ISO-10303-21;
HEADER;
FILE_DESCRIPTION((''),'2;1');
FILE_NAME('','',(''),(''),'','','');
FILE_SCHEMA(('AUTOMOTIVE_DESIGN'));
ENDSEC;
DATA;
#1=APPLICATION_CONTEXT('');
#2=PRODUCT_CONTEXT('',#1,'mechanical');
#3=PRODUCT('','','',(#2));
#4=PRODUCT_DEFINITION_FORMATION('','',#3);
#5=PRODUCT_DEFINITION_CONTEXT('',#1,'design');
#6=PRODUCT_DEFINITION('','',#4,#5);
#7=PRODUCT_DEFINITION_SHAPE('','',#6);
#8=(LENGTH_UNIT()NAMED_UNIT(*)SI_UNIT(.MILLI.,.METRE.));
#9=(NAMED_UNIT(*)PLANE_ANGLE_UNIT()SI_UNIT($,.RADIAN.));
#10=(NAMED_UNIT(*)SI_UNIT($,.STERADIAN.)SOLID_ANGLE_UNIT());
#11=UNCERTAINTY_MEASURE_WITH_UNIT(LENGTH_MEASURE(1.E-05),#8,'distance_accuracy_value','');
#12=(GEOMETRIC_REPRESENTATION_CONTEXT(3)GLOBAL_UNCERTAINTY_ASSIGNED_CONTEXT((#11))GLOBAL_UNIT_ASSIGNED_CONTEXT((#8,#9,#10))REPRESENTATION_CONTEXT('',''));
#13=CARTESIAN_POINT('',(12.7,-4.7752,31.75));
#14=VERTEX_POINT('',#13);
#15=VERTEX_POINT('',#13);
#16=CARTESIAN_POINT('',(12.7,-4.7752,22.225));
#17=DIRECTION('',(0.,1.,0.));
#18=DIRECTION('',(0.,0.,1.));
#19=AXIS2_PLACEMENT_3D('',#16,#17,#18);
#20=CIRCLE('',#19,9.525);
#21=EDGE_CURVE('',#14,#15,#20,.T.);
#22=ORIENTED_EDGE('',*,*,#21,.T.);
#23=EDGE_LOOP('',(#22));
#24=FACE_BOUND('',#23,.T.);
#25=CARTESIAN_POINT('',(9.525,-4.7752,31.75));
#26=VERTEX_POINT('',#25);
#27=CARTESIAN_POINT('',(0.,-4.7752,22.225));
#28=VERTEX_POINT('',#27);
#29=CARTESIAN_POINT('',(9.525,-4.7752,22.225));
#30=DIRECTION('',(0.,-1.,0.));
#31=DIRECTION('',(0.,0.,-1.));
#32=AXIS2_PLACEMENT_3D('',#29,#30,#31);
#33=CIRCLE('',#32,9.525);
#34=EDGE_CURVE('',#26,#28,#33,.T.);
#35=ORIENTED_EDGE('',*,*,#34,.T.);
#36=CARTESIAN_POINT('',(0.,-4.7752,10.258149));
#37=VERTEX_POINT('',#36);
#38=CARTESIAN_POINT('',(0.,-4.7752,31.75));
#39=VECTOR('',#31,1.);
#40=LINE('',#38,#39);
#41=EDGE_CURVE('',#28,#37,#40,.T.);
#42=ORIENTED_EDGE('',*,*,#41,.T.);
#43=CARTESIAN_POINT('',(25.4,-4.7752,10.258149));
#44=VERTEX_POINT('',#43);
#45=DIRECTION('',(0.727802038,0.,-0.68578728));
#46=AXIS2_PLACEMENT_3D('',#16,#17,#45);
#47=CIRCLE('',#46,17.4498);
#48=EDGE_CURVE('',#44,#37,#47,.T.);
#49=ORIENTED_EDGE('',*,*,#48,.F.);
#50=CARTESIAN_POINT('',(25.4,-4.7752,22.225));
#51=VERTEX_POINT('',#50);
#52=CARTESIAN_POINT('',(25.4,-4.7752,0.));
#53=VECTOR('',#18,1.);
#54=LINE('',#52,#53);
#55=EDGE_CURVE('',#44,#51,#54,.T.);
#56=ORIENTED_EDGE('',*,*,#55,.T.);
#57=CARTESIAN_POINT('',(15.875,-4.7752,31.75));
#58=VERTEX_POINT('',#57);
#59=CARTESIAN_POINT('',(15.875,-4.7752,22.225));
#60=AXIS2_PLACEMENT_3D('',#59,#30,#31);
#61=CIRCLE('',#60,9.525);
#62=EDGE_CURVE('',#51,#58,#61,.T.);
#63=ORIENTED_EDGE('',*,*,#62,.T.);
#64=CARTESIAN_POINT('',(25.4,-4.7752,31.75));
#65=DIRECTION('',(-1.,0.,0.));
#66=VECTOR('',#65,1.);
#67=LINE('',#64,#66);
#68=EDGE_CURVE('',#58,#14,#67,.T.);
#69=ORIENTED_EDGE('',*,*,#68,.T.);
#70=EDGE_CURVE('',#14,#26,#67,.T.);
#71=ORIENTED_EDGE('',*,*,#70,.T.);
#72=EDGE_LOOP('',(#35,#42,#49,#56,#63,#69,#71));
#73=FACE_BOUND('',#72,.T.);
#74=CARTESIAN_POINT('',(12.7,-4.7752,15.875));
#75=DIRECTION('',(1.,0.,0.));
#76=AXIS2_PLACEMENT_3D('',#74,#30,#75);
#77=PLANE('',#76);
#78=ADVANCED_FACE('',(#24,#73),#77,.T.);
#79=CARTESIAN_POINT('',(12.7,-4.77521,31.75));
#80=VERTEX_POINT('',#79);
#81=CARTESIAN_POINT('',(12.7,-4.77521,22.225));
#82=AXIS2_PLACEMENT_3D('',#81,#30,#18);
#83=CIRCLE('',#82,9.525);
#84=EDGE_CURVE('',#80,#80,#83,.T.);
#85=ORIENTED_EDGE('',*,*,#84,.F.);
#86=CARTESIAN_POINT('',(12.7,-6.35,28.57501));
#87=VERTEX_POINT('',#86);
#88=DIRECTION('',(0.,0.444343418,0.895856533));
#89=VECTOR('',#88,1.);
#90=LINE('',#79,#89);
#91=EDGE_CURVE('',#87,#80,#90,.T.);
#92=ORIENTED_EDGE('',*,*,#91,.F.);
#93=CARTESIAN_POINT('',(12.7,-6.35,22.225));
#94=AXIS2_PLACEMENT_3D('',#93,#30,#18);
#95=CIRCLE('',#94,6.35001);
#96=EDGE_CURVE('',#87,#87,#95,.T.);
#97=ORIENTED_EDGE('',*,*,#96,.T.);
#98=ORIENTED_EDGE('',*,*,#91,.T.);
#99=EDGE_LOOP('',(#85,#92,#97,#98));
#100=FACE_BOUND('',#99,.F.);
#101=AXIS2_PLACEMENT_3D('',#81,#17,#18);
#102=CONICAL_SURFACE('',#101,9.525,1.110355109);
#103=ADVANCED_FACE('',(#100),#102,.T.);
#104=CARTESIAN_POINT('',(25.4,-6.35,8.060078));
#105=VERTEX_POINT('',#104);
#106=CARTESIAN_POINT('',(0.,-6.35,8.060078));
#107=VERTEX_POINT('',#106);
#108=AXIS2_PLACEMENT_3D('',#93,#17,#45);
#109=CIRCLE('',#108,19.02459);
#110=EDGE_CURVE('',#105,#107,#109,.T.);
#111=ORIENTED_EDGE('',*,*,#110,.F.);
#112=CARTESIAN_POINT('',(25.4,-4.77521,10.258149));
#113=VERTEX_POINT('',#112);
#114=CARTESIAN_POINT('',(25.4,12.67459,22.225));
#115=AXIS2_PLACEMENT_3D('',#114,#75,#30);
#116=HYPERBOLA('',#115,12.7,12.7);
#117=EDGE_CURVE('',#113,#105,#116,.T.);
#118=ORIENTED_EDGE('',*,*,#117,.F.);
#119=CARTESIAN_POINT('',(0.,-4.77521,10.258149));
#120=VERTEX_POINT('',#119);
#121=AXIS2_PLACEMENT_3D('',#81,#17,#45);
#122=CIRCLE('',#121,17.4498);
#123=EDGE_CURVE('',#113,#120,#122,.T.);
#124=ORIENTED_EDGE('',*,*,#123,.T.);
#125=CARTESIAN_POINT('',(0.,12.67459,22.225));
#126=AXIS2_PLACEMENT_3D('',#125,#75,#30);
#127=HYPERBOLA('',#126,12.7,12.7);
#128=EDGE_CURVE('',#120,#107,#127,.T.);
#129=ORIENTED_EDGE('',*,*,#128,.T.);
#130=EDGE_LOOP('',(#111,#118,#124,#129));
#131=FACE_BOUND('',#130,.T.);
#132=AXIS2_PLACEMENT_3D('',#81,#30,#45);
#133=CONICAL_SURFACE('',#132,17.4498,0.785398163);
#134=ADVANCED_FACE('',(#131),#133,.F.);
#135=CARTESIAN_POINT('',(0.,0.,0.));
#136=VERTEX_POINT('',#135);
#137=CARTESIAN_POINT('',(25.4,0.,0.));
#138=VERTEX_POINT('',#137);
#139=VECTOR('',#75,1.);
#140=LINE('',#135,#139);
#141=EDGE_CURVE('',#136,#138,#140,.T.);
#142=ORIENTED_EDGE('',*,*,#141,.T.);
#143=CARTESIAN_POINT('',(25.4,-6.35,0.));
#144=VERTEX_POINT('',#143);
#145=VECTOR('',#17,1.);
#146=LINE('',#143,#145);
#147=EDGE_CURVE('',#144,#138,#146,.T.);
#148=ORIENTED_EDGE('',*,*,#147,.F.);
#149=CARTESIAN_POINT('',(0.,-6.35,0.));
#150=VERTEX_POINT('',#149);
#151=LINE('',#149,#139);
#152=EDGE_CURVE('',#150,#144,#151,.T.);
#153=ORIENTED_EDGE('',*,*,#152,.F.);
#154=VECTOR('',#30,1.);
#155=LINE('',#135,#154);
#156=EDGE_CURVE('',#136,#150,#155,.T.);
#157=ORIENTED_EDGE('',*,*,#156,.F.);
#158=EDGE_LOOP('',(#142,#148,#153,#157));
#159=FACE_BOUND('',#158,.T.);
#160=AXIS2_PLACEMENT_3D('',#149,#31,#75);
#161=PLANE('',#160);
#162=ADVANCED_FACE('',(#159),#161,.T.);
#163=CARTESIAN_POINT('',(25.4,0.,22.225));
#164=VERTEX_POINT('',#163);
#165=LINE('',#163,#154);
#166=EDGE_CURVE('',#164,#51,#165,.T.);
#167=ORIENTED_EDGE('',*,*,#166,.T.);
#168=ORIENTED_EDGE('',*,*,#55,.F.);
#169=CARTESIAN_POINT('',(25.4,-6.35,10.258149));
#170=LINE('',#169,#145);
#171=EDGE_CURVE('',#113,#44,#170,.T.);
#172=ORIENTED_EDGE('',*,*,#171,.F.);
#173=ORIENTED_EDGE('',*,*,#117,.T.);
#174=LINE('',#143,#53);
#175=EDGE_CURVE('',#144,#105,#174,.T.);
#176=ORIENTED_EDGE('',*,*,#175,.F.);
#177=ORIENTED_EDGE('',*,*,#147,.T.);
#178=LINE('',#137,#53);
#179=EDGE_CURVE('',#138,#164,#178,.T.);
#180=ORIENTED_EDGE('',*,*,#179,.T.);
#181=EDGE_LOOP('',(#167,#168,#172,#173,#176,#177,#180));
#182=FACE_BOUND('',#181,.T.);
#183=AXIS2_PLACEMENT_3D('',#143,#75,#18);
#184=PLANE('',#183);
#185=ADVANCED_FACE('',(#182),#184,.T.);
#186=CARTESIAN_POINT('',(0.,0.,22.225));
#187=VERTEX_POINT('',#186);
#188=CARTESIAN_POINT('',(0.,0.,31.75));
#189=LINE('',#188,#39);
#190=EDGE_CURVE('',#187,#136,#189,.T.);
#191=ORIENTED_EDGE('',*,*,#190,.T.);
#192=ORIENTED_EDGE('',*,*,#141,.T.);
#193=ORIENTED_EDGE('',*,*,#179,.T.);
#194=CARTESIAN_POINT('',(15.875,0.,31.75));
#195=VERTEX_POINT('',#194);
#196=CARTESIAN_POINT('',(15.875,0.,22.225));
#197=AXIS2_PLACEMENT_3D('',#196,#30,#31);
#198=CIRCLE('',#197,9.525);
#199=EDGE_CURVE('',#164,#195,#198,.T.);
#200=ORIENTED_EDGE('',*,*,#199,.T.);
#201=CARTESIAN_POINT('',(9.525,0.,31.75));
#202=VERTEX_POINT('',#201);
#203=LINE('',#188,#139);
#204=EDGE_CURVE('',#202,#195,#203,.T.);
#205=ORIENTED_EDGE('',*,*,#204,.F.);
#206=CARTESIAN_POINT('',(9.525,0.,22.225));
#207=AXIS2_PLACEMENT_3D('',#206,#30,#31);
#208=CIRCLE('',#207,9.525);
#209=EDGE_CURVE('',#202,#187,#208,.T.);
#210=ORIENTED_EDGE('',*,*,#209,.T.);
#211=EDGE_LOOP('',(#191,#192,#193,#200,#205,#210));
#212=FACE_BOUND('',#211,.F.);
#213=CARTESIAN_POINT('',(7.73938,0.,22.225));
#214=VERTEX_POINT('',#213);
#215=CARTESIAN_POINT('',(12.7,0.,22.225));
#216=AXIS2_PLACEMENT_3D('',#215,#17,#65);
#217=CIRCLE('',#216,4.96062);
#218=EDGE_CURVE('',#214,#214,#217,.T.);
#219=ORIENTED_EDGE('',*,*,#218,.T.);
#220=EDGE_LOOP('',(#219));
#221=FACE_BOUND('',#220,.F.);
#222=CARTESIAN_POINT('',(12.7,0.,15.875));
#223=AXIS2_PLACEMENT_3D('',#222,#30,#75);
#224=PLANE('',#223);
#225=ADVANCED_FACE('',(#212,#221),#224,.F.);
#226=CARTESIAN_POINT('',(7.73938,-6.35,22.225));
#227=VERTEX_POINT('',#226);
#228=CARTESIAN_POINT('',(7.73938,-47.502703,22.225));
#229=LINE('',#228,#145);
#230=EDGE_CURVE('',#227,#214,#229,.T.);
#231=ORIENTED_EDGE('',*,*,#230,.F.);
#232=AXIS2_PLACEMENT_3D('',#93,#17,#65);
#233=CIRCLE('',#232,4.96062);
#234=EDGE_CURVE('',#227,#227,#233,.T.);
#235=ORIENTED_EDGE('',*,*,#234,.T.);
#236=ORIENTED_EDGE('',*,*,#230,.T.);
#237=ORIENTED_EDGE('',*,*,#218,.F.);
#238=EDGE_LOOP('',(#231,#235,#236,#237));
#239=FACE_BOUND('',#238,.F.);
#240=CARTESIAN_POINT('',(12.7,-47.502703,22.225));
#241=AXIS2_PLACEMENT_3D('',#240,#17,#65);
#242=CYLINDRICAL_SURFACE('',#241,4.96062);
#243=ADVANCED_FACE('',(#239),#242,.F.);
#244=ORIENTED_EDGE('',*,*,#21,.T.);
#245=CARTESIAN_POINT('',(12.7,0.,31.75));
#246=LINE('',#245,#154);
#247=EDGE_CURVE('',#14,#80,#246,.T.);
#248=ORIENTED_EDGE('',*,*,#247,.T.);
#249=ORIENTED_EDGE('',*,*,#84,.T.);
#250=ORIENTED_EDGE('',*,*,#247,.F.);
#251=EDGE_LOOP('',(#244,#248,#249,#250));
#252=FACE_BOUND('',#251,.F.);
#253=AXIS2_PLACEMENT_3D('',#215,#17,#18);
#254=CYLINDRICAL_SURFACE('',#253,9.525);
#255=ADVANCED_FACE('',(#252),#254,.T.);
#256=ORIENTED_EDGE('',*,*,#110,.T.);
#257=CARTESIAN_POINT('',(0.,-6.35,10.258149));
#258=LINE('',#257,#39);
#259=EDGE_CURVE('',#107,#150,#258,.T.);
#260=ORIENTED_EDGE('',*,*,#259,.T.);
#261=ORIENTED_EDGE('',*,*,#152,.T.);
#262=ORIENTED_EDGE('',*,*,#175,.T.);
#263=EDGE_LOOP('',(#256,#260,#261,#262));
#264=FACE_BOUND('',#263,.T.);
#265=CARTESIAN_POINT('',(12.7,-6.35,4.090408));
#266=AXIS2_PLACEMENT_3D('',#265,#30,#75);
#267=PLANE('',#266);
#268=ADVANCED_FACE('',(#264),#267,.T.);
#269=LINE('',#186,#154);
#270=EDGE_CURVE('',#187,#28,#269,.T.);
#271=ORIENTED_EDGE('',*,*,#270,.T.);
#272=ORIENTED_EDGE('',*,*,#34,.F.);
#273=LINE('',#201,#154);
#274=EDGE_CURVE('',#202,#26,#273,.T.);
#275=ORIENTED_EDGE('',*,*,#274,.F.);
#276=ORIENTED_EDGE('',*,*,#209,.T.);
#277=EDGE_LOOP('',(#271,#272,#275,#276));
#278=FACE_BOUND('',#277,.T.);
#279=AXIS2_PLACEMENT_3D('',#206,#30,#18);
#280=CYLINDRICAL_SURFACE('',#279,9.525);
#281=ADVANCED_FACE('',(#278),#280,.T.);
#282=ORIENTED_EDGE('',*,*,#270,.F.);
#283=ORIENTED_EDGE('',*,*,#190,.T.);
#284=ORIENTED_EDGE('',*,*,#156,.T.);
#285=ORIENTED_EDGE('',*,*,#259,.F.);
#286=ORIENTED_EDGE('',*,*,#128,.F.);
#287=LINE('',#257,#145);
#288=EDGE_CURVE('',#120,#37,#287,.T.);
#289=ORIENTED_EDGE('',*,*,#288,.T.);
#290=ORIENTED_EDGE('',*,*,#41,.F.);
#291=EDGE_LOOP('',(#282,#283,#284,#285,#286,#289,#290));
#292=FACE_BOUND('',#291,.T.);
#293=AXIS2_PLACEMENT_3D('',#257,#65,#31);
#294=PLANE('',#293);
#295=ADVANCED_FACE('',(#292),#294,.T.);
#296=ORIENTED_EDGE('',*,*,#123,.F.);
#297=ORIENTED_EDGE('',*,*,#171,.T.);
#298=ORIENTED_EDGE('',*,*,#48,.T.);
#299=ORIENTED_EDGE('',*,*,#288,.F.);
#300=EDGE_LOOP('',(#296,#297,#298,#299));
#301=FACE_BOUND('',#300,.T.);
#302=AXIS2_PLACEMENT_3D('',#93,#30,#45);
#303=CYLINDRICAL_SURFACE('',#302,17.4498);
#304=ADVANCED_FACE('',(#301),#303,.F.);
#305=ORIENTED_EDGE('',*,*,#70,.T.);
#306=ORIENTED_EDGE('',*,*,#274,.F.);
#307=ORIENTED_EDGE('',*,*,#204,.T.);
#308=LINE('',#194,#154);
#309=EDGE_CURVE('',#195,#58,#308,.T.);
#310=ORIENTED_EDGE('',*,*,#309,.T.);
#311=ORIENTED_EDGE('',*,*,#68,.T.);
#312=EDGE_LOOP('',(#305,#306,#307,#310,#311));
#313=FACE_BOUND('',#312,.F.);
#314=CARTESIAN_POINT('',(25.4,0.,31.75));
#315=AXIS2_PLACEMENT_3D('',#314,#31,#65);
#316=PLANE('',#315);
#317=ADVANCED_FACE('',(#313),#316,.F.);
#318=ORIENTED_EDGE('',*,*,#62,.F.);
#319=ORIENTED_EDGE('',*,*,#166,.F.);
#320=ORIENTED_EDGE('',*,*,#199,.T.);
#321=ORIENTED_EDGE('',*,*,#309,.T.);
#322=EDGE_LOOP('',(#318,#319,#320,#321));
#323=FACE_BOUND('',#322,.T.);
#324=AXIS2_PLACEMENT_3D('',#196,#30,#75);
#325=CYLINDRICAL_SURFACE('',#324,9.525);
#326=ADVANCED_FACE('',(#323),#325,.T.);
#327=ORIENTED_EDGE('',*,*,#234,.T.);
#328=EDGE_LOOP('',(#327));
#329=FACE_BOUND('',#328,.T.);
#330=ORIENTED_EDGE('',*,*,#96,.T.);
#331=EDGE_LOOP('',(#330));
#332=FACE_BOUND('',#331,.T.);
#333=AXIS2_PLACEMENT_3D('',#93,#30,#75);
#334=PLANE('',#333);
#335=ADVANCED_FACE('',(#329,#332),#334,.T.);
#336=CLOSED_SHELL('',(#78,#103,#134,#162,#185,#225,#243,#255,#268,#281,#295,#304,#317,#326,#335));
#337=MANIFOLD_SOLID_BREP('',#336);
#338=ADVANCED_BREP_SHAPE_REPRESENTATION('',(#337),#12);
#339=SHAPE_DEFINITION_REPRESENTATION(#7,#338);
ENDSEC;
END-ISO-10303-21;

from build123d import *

# Parameters (mm, degrees)
F0_R     = 4.953
F1_DEPTH = 4.7752
F2_DEPTH = 6.35
F4_DEPTH = 1.5748
F5_SIZE2 = 1.57479
F5_SIZE  = 3.17499
F6_SIZE  = 1.57479
F7_R     = 9.525
F8_R     = 4.953
F9_DEPTH = 6.35
F11_D    = 9.92124


# Not quite as in the source:
# - a fillet or chamfer is up to 0.001 mm smaller than in the source, because OpenCascade refuses the exact size


with BuildPart() as f1:
    # F0 (on Front) → F1 (new body)
    with BuildSketch(Plane.XZ):
        Polygon((0, 31.75), (0, 0), (25.4, 0), (25.4, 31.75), (12.7, 31.75), align=None)
        with BuildLine():
            ThreePointArc((22.225, 22.225), (5.9648079092, 15.4898079092), (12.7, 31.75))
            ThreePointArc((12.7, 31.75), (19.4351920908, 28.9601920908), (22.225, 22.225))
        make_face(mode=Mode.SUBTRACT)
        with BuildLine():
            ThreePointArc((22.225, 22.225), (19.4351920908, 28.9601920908), (12.7, 31.75))
            ThreePointArc((12.7, 31.75), (5.9648079092, 15.4898079092), (22.225, 22.225))
        make_face()
        with Locations((12.7, 22.225)):
            Circle(F0_R, mode=Mode.SUBTRACT)
    extrude(amount=F1_DEPTH)

    # F0 (on Front) → F2 (join)
    with BuildSketch(Plane.XZ):
        with BuildLine():
            ThreePointArc((22.225, 22.225), (19.4351920908, 28.9601920908), (12.7, 31.75))
            ThreePointArc((12.7, 31.75), (5.9648079092, 15.4898079092), (22.225, 22.225))
        make_face()
        with Locations((12.7, 22.225)):
            Circle(F0_R, mode=Mode.SUBTRACT)
    extrude(amount=F2_DEPTH)

    # F3 (on face) → F4 (join, through all)
    with BuildSketch(Plane.XZ.offset(6.35)):
        with BuildLine():
            ThreePointArc((25.4, 10.2581491177), (12.7, 4.7752), (0, 10.2581491177))
            Line((0, 10.2581491177), (0, 0))
            Line((0, 0), (25.4, 0))
            Line((25.4, 0), (25.4, 10.2581491177))
        make_face()
    extrude(amount=-F4_DEPTH)

    # F5 (size 3.175 and 1.5748 in the source; OpenCascade refuses exactly that, so slightly less here)
    f5_edges = [f1.edges().sort_by_distance(p)[0] for p in [
        (3.175, -6.35, 22.225),
    ]]
    f5_side = f1.faces().sort_by_distance((3.444408, -6.35, 22.225))[0]
    chamfer(f5_edges, length=F5_SIZE, length2=F5_SIZE2, reference=f5_side)

    # F6 (size 1.5748 in the source; OpenCascade refuses exactly that, so slightly less here)
    f6_edges = [f1.edges().sort_by_distance(p)[0] for p in [
        (12.7, -6.35, 4.7752),
    ]]
    chamfer(f6_edges, length=F6_SIZE)

    # F7
    f7_edges = [f1.edges().sort_by_distance(p)[0] for p in [
        (0, -2.3876, 31.75),
        (25.4, -2.3876, 31.75),
    ]]
    fillet(f7_edges, radius=F7_R)

    # F8 (on face) → F9 (join, through all)
    with BuildSketch(Plane.XZ.offset(6.35)):
        with Locations((12.7, 22.225)):
            Circle(F8_R)
    extrude(amount=-F9_DEPTH)

    # F11 (through all)
    with Locations(Plane.XZ.offset(6.35)):
        with Locations((12.7, 22.225)):
            Hole(F11_D / 2)


solid = f1.part
